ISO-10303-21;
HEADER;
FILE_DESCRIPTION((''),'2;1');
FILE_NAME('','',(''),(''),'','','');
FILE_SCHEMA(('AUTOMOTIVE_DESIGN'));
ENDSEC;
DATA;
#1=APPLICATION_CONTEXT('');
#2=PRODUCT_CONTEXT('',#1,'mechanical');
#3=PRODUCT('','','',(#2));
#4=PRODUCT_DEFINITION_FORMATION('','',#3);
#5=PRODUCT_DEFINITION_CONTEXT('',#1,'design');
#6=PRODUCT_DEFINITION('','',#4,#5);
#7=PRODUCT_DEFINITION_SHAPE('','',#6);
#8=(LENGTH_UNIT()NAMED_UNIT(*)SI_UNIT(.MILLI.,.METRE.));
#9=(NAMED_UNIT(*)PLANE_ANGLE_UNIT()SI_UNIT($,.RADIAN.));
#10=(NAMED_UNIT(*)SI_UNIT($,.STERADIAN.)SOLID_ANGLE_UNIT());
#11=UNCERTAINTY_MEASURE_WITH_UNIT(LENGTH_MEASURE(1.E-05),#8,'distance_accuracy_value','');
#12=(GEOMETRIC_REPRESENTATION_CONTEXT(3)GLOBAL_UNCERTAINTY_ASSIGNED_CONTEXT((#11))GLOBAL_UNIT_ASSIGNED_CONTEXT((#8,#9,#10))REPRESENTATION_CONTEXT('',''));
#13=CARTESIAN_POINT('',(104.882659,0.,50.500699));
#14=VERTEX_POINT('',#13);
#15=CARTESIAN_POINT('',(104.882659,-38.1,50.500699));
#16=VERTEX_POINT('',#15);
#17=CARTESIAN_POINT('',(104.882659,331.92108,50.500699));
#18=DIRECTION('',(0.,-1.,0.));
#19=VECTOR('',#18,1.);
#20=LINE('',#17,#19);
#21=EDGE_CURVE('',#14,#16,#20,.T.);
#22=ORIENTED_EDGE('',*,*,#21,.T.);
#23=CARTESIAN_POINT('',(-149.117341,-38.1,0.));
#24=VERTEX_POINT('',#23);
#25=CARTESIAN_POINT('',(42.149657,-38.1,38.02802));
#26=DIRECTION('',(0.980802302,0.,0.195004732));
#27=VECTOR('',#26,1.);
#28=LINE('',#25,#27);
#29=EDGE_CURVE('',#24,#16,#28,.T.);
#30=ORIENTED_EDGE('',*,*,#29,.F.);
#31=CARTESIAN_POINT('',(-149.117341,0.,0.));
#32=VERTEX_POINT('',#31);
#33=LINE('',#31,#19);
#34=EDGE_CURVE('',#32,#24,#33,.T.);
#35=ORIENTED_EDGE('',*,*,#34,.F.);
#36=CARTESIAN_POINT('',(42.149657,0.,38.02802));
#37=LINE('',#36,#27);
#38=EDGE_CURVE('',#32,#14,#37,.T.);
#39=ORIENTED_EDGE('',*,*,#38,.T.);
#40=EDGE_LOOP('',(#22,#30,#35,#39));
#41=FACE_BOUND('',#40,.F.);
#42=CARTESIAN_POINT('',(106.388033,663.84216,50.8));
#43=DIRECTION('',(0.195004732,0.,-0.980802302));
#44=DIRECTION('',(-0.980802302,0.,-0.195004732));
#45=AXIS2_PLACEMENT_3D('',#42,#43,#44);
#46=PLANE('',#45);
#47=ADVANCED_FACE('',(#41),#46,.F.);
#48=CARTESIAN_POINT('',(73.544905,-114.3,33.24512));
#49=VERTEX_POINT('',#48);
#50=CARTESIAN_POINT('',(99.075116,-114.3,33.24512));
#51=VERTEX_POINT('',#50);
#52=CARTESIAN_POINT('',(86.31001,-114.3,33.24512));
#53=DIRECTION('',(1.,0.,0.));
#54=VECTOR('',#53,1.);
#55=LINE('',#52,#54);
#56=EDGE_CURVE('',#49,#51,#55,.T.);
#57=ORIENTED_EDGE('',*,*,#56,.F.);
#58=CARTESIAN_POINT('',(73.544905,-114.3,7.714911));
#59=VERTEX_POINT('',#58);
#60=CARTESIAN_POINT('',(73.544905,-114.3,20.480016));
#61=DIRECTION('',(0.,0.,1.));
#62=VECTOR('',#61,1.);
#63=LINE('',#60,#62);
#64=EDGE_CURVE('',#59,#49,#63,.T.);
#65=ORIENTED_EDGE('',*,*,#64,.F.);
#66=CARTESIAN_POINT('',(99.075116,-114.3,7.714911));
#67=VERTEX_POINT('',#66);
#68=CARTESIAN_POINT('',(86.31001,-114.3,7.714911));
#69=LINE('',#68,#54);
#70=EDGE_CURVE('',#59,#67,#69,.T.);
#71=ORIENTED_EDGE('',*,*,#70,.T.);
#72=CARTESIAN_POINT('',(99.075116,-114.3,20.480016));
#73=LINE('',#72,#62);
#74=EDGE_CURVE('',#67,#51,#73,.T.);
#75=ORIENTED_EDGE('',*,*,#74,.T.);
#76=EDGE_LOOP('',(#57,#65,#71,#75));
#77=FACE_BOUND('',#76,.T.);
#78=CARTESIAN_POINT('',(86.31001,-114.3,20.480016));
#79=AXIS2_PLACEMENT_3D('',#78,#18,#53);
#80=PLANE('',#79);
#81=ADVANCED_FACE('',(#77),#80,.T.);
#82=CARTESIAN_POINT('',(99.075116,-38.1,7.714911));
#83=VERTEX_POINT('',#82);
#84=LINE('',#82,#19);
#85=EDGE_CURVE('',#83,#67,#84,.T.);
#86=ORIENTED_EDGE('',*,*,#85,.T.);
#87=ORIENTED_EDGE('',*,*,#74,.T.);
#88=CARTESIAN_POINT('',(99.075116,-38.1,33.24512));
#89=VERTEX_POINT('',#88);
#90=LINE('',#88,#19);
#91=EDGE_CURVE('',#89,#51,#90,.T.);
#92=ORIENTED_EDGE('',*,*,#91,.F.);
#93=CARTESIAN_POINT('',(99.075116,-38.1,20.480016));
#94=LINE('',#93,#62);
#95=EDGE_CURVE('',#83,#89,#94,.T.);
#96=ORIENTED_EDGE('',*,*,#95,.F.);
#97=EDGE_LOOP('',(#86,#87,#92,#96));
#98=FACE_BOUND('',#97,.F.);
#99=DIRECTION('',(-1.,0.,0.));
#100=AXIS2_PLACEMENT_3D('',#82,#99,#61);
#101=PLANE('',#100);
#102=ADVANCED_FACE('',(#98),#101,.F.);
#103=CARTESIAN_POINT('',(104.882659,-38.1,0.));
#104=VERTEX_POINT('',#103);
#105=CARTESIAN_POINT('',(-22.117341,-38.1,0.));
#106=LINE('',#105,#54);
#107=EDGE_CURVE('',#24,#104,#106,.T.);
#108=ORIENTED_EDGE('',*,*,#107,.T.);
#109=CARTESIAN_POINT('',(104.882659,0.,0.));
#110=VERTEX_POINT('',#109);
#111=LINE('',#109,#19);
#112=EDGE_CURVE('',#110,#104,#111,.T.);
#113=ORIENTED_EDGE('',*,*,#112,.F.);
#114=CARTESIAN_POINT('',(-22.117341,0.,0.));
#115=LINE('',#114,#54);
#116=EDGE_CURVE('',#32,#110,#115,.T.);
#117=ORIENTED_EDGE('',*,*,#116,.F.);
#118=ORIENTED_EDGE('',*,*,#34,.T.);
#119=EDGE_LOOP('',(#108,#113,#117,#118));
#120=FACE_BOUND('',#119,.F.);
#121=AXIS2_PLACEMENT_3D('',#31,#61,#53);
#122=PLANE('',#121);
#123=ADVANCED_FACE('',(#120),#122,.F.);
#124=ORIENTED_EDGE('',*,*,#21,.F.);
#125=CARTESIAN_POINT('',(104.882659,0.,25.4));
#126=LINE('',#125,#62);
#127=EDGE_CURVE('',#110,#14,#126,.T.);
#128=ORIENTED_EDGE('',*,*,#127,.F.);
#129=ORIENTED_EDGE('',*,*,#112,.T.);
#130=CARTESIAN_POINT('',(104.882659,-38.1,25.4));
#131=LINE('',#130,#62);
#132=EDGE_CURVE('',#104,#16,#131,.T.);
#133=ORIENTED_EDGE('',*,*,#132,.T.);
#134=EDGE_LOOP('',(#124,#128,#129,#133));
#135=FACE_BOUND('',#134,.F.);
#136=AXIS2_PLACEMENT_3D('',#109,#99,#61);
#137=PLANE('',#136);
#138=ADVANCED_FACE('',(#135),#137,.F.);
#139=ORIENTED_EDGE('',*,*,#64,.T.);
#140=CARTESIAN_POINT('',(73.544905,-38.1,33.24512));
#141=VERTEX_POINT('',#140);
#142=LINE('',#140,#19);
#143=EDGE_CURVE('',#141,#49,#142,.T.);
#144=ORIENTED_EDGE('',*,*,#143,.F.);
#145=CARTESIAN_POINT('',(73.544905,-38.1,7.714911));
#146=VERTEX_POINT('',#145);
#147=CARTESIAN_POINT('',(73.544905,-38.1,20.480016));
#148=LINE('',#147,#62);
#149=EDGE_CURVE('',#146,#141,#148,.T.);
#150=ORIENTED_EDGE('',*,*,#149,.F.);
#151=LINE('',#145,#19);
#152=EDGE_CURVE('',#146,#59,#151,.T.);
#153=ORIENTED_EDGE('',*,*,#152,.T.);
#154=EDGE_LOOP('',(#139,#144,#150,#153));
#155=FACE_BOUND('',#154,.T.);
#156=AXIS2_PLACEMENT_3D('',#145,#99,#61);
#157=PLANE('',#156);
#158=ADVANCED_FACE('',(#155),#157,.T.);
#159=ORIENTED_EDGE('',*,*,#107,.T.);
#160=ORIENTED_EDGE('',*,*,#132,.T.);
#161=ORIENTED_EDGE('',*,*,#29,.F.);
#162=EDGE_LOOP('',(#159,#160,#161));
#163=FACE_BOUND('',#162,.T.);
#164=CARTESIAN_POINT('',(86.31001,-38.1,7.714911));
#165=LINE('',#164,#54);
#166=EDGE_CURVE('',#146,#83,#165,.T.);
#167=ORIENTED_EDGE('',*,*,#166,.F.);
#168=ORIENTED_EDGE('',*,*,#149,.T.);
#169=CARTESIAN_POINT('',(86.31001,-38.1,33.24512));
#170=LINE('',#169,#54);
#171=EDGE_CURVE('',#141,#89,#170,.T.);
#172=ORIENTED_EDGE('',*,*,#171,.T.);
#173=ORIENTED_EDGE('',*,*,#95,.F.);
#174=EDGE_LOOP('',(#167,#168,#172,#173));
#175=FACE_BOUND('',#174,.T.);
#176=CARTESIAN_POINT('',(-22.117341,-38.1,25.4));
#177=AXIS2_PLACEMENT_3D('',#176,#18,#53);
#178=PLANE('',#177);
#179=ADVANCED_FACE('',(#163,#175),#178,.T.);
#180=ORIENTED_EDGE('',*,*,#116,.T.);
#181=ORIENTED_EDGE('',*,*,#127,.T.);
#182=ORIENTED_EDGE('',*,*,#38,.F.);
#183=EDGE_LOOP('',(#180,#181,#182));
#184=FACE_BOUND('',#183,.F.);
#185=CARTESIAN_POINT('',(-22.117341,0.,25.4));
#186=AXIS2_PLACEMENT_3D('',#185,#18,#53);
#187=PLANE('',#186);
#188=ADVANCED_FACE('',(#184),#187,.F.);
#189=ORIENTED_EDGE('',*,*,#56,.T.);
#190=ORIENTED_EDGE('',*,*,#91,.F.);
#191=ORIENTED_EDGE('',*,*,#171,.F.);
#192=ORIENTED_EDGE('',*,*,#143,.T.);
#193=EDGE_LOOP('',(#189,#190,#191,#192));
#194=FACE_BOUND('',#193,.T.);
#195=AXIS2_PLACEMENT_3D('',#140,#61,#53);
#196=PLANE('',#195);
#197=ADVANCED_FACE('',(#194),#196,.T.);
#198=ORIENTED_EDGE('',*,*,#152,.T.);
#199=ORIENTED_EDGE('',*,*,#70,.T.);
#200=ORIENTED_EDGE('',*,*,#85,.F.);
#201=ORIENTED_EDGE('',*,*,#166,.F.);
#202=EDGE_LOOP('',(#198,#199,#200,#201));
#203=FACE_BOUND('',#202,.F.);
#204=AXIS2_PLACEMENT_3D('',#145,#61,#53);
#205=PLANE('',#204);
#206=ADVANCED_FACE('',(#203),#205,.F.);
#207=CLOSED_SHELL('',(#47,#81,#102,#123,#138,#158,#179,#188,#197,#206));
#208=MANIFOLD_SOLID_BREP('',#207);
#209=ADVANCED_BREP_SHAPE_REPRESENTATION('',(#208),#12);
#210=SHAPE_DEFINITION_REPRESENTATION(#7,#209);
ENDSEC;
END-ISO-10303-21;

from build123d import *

# Parameters (mm, degrees)
F0_W        = 254
F0_H        = 50.8
F1_DEPTH    = 38.1
F2_T1_DEPTH = 1365.7843192567
F3_W        = 25.5302116275
F3_H        = 25.5302092992
F4_DEPTH    = 76.2


# Not quite as in the source:
# - a fillet or chamfer that OpenCascade refuses, or shapes differently, is made with other operations: its cross-section is extruded or revolved along the edge and cut away or added


with BuildPart() as f1:
    # F0 (on Front) → F1 (new body)
    with BuildSketch(Plane.XZ):
        with Locations((-22.1173410591, 25.4)):
            Rectangle(F0_W, F0_H)
    extrude(amount=F1_DEPTH)

    # F2: chamfer of 50.8 x 255.5053741775 on 1 edges, made by hand

    # F2_s2 → F2_t1 (cut)
    with BuildSketch(Plane.XZ.offset(-663.8421596283)):
        Polygon((106.3880331184, 50.8), (-149.1173410591, 0), (-149.1173410591, 50.8), align=None)
    extrude(amount=F2_T1_DEPTH, mode=Mode.SUBTRACT)

    # F3 (on face) → F4 (join)
    with BuildSketch(Plane.XZ.offset(38.1)):
        with Locations((86.3100104034, 20.4800155479)):
            Rectangle(F3_W, F3_H)
    extrude(amount=F4_DEPTH)


solid = f1.part
